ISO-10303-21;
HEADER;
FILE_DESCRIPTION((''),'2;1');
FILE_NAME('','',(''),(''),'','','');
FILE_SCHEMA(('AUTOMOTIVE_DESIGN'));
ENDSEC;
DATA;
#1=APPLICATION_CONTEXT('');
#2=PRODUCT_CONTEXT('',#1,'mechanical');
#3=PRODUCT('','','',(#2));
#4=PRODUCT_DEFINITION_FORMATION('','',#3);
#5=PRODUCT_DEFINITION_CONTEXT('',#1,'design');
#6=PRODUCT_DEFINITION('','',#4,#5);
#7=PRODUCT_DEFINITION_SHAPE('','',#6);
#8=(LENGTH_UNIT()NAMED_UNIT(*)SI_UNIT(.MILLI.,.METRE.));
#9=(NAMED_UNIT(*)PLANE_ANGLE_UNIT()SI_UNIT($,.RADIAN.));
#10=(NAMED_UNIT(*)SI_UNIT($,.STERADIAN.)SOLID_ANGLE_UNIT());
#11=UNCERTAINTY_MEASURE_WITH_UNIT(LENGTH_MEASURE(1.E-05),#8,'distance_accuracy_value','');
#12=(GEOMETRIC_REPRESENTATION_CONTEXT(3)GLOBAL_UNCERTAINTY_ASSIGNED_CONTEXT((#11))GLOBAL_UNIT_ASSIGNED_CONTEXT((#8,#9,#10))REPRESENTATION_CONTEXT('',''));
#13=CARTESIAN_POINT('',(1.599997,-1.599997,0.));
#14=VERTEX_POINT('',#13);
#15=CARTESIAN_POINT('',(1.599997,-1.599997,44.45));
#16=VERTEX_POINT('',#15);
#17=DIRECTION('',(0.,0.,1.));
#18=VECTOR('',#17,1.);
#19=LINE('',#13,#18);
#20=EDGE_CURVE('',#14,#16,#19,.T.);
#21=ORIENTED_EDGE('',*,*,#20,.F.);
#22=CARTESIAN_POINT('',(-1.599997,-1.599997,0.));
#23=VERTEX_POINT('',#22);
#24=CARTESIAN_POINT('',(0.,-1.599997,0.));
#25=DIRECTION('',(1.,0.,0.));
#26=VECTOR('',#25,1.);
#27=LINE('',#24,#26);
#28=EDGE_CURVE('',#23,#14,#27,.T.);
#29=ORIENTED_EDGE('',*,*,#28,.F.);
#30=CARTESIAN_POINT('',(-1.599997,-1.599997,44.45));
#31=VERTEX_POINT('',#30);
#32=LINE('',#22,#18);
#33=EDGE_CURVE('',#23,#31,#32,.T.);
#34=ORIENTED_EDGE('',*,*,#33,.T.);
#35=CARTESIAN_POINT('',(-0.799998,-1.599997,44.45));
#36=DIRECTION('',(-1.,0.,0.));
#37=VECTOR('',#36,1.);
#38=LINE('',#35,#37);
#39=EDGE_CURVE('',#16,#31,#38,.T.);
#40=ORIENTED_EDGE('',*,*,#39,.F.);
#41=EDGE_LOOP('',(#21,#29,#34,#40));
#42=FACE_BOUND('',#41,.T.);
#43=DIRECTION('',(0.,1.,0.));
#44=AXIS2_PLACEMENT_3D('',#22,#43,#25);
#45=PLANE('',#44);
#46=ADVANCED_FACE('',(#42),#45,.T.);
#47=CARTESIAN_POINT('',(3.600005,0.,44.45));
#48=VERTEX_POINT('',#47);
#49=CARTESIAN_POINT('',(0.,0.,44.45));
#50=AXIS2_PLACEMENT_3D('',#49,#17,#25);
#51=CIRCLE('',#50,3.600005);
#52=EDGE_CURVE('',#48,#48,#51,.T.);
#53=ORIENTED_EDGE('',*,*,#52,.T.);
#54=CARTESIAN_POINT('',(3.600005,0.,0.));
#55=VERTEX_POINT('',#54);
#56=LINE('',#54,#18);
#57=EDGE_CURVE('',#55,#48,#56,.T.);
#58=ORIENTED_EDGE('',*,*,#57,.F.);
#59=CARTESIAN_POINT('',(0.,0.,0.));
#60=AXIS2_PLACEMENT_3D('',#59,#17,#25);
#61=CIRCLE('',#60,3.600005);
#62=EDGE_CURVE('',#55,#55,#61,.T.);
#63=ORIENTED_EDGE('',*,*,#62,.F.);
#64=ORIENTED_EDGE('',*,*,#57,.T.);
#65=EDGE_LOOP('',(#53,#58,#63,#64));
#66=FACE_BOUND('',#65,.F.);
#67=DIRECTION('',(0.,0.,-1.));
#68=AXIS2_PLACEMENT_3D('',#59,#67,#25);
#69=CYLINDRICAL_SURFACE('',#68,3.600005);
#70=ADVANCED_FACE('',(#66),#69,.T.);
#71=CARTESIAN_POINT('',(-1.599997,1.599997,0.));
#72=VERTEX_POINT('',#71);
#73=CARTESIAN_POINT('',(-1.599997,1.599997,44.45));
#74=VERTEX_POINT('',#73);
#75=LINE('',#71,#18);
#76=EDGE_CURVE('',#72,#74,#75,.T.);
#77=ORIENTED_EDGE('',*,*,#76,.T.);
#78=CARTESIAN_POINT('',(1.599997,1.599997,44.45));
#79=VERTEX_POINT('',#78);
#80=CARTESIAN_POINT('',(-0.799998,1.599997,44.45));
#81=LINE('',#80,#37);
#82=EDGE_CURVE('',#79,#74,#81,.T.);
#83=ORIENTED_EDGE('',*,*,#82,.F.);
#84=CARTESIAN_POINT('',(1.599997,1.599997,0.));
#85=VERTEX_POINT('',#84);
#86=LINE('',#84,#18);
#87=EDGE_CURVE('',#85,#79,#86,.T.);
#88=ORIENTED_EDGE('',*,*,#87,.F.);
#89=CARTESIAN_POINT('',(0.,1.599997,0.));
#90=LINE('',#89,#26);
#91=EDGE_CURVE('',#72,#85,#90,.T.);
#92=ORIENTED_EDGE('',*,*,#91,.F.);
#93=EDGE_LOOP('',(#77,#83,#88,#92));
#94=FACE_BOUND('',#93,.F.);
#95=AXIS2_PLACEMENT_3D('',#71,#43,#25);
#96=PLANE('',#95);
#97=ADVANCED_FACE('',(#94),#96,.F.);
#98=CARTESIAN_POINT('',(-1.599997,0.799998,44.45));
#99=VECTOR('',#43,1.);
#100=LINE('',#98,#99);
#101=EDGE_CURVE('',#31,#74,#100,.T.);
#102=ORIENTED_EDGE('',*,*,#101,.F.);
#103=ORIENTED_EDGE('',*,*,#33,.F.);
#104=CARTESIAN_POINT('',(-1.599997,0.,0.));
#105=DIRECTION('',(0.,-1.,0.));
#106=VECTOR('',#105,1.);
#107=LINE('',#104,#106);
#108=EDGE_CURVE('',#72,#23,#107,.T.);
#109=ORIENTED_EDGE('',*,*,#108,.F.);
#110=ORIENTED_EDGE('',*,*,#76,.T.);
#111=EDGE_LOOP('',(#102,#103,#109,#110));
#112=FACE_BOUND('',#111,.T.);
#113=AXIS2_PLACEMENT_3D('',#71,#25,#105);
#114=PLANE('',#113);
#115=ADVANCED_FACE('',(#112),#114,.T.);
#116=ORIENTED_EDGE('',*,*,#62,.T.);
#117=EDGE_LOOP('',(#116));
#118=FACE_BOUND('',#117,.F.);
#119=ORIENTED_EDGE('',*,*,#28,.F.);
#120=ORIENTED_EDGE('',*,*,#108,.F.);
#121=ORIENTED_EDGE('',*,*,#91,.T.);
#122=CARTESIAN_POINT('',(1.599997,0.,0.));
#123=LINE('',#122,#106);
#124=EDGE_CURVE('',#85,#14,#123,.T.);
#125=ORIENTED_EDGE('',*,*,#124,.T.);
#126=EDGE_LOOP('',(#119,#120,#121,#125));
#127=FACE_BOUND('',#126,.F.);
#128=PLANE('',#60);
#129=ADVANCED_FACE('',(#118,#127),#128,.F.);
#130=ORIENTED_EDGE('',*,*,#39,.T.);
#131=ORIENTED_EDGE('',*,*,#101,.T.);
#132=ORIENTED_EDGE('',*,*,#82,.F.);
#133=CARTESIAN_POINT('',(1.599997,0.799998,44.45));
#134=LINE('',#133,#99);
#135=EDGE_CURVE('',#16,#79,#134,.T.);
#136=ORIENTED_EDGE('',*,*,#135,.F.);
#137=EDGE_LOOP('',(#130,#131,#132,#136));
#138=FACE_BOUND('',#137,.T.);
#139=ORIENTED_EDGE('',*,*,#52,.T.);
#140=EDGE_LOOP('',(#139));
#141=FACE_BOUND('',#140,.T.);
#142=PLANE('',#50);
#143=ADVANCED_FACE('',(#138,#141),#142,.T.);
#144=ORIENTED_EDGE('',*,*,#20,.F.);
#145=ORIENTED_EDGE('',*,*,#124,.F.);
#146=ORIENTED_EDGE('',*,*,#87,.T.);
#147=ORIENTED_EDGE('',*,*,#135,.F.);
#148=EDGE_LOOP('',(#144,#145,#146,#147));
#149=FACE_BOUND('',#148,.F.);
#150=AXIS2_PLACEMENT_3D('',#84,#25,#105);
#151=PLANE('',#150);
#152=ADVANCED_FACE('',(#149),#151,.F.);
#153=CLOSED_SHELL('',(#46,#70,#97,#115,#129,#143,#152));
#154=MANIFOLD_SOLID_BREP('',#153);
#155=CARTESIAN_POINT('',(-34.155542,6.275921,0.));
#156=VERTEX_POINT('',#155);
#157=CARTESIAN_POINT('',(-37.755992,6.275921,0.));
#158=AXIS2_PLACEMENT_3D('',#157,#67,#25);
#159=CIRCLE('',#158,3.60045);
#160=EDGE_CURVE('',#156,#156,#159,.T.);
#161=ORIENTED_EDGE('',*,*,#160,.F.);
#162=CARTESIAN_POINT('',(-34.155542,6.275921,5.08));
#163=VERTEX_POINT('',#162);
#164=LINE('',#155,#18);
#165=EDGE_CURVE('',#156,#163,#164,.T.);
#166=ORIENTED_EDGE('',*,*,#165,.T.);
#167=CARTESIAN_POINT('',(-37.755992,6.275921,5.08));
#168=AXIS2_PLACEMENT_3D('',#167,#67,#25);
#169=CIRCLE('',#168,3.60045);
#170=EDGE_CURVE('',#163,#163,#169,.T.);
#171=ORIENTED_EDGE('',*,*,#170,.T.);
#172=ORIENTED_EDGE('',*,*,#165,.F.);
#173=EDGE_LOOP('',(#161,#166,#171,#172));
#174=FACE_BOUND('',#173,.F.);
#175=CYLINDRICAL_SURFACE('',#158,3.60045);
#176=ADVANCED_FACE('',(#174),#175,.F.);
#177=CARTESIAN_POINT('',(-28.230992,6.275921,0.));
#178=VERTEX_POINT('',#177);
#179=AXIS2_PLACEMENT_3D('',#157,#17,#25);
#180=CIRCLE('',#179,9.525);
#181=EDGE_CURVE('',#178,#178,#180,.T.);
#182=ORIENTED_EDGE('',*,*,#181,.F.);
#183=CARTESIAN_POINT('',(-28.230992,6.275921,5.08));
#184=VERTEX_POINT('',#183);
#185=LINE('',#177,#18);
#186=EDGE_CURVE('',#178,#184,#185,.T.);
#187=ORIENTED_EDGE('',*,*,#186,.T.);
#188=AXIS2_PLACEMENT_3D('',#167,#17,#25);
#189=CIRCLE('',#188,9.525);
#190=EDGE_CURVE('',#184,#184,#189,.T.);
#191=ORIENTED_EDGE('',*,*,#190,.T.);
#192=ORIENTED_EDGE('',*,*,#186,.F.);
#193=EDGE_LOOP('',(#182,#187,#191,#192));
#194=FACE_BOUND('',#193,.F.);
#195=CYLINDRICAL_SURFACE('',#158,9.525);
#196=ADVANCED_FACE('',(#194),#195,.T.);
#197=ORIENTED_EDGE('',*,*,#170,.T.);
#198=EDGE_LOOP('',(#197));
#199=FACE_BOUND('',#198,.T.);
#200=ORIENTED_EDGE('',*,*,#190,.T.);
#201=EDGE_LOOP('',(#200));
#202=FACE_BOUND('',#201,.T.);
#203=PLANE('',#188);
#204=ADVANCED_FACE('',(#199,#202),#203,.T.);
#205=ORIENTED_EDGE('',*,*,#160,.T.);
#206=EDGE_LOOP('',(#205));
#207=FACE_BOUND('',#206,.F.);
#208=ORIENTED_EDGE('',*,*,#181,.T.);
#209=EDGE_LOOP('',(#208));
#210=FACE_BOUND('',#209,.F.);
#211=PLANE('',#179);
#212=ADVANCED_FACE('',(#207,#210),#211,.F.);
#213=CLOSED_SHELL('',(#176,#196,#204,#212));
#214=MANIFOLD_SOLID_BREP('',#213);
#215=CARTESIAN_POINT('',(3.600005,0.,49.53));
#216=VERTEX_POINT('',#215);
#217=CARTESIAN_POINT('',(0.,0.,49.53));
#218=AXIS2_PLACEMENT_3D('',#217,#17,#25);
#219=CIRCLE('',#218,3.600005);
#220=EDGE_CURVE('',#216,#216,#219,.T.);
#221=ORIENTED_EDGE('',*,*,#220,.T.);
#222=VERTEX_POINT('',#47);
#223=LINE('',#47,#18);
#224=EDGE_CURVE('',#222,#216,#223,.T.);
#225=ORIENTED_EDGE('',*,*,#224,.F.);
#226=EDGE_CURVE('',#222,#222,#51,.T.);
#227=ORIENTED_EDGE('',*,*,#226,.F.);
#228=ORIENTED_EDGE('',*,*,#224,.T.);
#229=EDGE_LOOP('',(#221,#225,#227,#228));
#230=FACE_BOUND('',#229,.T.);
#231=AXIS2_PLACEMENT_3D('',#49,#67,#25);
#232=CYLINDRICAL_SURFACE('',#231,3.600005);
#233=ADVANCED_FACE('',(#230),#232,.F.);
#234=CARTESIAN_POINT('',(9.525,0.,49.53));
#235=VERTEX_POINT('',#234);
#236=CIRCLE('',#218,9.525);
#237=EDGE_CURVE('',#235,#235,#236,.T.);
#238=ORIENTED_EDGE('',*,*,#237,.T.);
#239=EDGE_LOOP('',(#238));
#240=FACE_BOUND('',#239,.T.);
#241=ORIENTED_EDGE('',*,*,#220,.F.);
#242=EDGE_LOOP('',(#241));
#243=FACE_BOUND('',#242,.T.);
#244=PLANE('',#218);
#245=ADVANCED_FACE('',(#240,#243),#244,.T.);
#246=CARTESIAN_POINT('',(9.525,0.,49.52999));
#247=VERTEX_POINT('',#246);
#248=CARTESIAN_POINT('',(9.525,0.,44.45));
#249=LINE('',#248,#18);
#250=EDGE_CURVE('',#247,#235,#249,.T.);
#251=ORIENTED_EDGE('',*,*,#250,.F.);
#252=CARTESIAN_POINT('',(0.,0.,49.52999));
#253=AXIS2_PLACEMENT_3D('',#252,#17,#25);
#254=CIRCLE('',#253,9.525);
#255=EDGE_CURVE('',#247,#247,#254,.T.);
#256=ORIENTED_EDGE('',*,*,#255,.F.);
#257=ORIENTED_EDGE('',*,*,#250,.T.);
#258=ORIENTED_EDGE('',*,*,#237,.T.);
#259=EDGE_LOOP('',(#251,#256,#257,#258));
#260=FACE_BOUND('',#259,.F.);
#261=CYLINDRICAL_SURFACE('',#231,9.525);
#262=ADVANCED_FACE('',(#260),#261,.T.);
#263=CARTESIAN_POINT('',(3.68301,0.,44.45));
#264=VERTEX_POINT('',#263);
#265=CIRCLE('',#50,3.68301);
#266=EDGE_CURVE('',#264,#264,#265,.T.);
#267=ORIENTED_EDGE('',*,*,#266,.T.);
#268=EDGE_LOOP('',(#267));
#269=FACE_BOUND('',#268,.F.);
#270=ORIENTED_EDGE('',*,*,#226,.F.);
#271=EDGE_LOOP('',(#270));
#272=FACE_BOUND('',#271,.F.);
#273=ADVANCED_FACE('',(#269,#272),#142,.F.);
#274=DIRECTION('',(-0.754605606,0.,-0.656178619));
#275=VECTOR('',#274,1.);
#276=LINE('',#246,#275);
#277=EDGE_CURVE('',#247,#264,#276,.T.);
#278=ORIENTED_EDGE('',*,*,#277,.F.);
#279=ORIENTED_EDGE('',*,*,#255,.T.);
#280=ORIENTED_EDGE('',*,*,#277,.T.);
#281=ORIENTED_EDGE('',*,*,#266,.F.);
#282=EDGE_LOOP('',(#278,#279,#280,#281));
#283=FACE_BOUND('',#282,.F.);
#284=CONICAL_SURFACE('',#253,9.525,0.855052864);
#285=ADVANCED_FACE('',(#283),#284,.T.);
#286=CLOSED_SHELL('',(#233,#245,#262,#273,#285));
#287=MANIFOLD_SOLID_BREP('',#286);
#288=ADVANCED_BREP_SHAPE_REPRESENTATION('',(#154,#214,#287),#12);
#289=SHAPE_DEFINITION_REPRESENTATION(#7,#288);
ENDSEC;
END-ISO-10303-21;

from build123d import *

# Parameters (mm, degrees)
F0_R      = 3.6000055
F1_DEPTH  = 44.45
F2_W      = 3.1999936
F2_H      = 3.1999936
F3_DEPTH  = 45.466
F4_R      = 9.525
F4_R_2    = 3.6000055
F5_DEPTH  = 5.08
F6_SIZE2  = 5.84199
F6_SIZE   = 5.07999
F7_R      = 9.525
F8_DEPTH  = 5.08
F9_R      = 3.60045
F10_DEPTH = 6.096


# Not quite as in the source:
# - a fillet or chamfer is up to 0.001 mm smaller than in the source, because OpenCascade refuses the exact size


with BuildPart() as f1:
    # F0 (on Top) → F1 (new body)
    with BuildSketch(Plane.XY):
        Circle(F0_R)
    extrude(amount=F1_DEPTH)

    # F2 (on face) → F3 (cut)
    with BuildSketch(Plane(origin=(0, 0, 0), x_dir=(1, 0, 0), z_dir=(0, 0, -1))):
        Rectangle(F2_W, F2_H)
    extrude(amount=-F3_DEPTH, mode=Mode.SUBTRACT)


with BuildPart() as f5:
    # F4 (on face) → F5 (new body)
    with BuildSketch(Plane.XY.offset(44.45)):
        Circle(F4_R)
        Circle(F4_R_2, mode=Mode.SUBTRACT)
    extrude(amount=F5_DEPTH)

    # F6 (size 5.08 and 5.842 in the source; OpenCascade refuses exactly that, so slightly less here)
    f6_edges = [f5.edges().sort_by_distance(p)[0] for p in [
        (-9.525, 0, 44.45),
    ]]
    f6_side = f5.faces().sort_by_distance((-9.525, 0, 46.99))[0]
    chamfer(f6_edges, length=F6_SIZE, length2=F6_SIZE2, reference=f6_side)


with BuildPart() as f8:
    # F7 (on Top) → F8 (new body)
    with BuildSketch(Plane.XY):
        with Locations((-37.7559922636, 6.275920663)):
            Circle(F7_R)
    extrude(amount=F8_DEPTH)

    # F9 (on face) → F10 (cut)
    with BuildSketch(Plane(origin=(0, 0, 0), x_dir=(1, 0, 0), z_dir=(0, 0, -1))):
        with Locations((-37.7559922636, -6.275920663)):
            Circle(F9_R)
    extrude(amount=-F10_DEPTH, mode=Mode.SUBTRACT)


solid = Compound([f1.part, f5.part, f8.part])
